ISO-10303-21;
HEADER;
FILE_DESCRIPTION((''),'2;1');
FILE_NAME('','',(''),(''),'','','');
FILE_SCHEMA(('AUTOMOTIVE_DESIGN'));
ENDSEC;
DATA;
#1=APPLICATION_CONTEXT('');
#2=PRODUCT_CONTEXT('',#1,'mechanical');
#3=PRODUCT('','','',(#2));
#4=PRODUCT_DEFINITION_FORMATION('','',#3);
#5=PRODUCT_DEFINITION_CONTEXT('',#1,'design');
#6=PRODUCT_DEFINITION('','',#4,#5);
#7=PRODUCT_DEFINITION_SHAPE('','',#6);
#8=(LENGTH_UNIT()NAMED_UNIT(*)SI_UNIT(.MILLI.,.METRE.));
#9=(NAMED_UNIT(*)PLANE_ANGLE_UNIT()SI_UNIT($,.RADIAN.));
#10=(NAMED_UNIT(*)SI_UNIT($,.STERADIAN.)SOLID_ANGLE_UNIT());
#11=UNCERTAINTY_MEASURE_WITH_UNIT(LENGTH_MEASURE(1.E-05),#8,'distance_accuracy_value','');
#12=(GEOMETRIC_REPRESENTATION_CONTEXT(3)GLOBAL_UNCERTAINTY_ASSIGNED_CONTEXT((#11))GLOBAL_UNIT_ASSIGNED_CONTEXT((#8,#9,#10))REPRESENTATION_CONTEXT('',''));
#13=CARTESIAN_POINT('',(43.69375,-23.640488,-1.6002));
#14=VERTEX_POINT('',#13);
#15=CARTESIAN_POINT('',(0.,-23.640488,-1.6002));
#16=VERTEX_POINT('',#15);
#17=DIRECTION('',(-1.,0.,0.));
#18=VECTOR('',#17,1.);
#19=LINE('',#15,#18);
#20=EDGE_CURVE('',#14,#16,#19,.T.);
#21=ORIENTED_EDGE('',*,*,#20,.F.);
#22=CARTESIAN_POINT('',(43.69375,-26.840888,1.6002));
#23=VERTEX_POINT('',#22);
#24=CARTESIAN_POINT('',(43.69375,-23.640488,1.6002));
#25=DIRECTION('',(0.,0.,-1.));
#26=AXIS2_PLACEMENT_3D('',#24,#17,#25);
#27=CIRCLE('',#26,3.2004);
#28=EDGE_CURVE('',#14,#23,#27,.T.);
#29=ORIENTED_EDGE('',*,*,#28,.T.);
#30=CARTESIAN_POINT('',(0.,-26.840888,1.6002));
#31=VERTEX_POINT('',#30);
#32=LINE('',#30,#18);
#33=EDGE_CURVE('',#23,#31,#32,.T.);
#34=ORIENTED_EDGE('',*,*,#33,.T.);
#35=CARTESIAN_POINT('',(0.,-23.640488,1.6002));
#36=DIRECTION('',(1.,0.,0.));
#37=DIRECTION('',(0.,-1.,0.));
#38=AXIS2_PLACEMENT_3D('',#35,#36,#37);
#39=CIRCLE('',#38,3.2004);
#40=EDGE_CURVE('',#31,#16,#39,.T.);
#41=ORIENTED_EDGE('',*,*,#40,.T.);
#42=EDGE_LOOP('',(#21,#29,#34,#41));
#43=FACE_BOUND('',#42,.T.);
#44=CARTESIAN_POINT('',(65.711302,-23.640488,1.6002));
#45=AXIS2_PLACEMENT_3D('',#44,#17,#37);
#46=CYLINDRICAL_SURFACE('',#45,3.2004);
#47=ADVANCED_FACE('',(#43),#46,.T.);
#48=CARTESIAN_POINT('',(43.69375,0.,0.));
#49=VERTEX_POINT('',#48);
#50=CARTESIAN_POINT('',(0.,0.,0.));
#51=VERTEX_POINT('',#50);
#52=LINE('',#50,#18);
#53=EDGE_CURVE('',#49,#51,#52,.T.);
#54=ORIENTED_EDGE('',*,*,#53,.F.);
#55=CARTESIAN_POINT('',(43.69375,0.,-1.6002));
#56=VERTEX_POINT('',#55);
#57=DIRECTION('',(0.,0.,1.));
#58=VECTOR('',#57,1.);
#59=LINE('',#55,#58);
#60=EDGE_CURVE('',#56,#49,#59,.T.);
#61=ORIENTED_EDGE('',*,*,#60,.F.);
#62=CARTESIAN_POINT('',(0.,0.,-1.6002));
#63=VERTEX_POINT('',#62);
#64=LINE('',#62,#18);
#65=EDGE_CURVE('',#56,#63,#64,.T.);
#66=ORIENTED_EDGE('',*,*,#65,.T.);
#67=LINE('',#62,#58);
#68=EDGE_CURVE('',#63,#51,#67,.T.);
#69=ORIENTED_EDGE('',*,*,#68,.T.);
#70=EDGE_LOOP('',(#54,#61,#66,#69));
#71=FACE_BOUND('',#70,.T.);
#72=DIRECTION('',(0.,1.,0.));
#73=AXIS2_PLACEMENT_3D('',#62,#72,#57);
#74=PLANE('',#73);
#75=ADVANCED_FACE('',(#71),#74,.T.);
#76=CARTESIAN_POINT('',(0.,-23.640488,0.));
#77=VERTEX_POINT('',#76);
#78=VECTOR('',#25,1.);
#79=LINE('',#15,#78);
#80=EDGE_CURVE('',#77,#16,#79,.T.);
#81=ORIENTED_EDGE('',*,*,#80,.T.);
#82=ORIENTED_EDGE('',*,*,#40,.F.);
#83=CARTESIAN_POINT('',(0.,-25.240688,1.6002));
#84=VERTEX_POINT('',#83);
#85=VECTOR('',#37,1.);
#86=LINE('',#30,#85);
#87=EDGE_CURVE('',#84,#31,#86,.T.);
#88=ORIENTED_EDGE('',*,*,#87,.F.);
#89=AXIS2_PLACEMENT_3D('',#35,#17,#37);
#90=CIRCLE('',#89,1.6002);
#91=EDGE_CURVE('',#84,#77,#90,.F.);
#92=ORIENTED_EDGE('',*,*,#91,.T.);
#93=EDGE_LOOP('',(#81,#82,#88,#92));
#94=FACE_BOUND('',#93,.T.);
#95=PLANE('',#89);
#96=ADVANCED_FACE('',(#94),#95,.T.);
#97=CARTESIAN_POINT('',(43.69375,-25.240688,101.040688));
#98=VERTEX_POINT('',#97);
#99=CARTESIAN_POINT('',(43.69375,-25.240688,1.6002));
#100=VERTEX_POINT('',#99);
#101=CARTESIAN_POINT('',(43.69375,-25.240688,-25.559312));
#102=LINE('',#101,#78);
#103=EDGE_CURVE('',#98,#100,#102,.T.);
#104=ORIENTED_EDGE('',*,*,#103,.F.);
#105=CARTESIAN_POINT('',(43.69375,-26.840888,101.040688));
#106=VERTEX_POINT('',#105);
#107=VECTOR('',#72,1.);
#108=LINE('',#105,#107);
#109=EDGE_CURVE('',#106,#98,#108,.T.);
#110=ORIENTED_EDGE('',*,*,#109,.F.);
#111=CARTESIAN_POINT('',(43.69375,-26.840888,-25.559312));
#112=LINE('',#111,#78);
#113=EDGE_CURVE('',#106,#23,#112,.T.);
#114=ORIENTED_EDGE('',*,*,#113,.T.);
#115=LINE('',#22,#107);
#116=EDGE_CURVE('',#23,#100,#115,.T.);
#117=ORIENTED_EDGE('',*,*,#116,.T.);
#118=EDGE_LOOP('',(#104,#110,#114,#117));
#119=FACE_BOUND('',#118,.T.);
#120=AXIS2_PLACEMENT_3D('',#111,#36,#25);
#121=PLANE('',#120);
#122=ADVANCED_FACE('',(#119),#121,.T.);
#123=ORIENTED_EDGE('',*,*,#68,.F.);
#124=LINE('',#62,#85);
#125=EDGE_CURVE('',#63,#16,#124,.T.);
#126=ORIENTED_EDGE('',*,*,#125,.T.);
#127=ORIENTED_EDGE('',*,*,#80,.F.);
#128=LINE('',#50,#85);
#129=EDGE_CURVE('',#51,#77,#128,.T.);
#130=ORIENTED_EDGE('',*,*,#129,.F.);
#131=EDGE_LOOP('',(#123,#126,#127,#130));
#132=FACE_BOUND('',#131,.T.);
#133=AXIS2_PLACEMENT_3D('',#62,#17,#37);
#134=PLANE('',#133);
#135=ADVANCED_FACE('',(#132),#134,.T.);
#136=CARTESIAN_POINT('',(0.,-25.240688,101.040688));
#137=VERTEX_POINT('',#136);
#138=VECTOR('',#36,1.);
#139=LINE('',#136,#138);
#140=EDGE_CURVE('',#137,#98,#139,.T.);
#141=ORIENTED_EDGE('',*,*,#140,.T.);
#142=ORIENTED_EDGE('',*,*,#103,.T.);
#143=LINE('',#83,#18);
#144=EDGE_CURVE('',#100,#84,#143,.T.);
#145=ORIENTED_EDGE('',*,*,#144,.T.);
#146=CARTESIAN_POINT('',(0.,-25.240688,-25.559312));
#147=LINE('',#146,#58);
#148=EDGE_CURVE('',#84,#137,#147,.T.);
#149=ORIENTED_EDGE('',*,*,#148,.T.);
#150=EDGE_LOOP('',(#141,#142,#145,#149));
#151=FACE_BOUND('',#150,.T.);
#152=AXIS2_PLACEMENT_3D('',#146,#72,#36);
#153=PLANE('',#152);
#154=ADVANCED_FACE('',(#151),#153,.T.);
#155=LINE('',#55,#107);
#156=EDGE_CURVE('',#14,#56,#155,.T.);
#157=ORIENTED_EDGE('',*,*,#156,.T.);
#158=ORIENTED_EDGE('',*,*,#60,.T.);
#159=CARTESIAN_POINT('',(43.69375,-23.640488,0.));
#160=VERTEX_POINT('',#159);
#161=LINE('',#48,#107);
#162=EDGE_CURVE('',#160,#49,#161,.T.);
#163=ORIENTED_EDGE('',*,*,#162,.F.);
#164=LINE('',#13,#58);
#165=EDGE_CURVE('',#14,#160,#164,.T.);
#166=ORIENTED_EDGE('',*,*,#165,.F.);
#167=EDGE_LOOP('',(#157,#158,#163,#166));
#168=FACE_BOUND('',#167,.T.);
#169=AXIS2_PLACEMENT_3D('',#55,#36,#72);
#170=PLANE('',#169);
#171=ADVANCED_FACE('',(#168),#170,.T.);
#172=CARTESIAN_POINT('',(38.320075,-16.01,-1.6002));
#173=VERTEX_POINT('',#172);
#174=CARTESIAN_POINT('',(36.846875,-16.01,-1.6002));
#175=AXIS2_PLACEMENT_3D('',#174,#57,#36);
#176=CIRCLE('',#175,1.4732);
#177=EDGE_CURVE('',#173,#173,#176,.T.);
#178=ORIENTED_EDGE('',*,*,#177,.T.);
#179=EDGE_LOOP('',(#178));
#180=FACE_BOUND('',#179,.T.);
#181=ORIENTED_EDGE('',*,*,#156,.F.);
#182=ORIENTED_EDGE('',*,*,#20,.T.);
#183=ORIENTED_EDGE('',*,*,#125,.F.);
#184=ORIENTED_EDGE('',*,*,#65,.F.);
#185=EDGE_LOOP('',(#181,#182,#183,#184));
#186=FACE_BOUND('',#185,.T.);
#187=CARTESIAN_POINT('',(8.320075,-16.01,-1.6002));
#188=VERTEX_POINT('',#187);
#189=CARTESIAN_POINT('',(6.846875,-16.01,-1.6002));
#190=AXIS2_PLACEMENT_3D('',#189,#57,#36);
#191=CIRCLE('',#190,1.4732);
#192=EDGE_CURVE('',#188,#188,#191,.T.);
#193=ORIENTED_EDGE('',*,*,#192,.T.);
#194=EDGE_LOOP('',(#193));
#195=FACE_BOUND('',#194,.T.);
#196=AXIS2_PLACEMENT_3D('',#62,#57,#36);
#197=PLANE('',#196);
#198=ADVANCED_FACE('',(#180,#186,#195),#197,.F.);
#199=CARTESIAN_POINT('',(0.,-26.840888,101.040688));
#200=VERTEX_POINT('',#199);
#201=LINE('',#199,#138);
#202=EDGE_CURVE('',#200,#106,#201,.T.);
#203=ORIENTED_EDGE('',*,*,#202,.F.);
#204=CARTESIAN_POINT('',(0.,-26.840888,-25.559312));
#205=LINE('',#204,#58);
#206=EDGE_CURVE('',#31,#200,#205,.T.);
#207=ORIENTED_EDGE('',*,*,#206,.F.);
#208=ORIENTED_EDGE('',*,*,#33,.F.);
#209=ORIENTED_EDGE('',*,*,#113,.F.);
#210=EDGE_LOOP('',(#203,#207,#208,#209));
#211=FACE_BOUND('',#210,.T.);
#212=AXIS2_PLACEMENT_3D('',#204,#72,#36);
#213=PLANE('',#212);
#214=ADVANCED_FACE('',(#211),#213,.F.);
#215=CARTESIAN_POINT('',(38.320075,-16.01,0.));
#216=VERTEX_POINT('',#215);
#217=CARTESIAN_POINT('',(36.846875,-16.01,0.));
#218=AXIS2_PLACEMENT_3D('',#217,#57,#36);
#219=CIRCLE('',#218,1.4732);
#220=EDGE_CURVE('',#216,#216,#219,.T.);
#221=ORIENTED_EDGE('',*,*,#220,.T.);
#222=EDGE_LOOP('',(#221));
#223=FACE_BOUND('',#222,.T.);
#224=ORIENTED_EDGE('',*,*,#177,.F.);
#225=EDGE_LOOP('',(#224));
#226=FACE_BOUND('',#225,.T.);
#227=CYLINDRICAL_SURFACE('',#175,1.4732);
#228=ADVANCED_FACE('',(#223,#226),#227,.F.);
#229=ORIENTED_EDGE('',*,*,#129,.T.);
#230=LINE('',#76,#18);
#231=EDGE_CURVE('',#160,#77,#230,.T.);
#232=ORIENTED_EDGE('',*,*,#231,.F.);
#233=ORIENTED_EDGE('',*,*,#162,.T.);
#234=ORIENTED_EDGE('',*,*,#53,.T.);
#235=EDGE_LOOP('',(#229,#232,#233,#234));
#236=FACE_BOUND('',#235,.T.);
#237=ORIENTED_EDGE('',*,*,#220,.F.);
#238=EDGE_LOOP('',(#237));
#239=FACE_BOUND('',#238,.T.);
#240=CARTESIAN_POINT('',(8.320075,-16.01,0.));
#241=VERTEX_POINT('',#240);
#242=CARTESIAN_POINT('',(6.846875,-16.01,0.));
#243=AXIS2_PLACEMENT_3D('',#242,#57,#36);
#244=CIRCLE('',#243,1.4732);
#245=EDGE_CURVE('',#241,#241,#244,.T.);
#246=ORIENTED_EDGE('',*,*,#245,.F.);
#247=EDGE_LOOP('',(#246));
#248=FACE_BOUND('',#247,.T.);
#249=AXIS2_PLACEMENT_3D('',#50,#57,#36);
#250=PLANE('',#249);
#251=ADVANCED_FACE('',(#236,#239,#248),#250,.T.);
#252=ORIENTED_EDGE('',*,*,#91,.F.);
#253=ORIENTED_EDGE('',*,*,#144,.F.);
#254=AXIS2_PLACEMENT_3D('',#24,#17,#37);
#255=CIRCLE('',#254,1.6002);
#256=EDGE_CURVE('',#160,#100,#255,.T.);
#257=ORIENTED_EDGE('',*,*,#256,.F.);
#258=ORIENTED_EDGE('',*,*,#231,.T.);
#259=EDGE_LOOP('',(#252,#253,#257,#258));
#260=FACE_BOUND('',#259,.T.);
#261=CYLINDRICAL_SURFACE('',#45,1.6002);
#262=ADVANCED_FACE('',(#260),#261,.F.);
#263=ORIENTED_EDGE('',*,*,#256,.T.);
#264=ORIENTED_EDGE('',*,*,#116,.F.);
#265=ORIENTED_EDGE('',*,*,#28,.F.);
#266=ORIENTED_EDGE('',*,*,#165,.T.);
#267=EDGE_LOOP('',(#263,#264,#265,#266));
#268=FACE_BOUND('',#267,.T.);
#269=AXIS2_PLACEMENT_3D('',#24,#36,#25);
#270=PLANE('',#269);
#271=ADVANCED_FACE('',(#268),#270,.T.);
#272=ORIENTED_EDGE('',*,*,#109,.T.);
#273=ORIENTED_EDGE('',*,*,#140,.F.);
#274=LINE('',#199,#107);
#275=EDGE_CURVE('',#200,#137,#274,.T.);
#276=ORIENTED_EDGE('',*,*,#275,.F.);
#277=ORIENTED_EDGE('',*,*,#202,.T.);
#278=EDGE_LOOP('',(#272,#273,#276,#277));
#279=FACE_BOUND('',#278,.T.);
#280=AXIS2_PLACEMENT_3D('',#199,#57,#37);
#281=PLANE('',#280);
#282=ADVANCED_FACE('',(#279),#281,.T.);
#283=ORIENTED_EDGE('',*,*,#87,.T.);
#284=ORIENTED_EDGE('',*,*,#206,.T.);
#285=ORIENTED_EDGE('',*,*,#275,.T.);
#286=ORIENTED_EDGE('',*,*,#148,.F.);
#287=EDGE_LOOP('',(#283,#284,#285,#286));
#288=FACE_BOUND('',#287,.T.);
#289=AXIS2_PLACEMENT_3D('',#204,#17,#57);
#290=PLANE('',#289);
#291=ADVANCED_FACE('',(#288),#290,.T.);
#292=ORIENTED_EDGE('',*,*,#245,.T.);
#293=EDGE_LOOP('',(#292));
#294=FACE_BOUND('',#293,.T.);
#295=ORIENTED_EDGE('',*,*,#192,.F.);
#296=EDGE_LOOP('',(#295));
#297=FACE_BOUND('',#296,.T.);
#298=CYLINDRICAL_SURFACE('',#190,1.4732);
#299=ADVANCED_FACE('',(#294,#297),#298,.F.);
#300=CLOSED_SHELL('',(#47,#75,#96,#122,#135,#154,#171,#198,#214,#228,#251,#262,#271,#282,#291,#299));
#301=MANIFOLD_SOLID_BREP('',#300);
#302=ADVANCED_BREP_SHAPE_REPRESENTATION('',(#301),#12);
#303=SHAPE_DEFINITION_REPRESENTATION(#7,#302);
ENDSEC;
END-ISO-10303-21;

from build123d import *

# Parameters (mm, degrees)
SKETCH1_W              = 43.69375
SKETCH1_H              = 126.6
SKETCH1_R              = 1.4732
BASE_FLANGE1_DEPTH     = 1.6002
SKETCHED_BEND1_DEPTH   = 43.69375
SKETCHED_BEND1_2_DEPTH = 43.69375


# Read off the part's stored shape, not the designer's step: Sketched Bend1
# Sheet-metal steps are written as plain solids
with BuildPart() as part:
    # Sketch1 → Base-Flange1 (new body)
    with BuildSketch(Plane.XY):
        with Locations((21.846875, -63.3)):
            Rectangle(SKETCH1_W, SKETCH1_H)
        with Locations((6.846875, -16.01)):
            Circle(SKETCH1_R, mode=Mode.SUBTRACT)
        with Locations((36.846875, -16.01)):
            Circle(SKETCH1_R, mode=Mode.SUBTRACT)
    extrude(amount=-BASE_FLANGE1_DEPTH)

    # Sketched Bend1 outline → Sketched Bend1 (cut)
    with BuildSketch(Plane.YZ):
        with BuildLine():
            ThreePointArc((-23.640488203, -1.6002), (-25.240688203, -1.171427702), (-26.412115905, 0))
            Line((-26.412115905, 0), (-126.6, 0))
            Line((-126.6, 0), (-126.6, -1.6002))
            Line((-126.6, -1.6002), (-23.640488203, -1.6002))
        make_face()
    extrude(amount=SKETCHED_BEND1_DEPTH, mode=Mode.SUBTRACT)

    # Sketched Bend1 2 outline → Sketched Bend1 2 (add)
    with BuildSketch(Plane.YZ):
        with BuildLine():
            ThreePointArc((-23.640488203, 0), (-24.772000474, 0.468687729), (-25.240688203, 1.6002))
            Line((-25.240688203, 1.6002), (-25.240688203, 101.040688203))
            Line((-25.240688203, 101.040688203), (-26.840888203, 101.040688203))
            Line((-26.840888203, 101.040688203), (-26.840888203, 1.6002))
            ThreePointArc((-26.840888203, 1.6002), (-26.731837217, 0.771875528), (-26.412115905, 0))
            Line((-26.412115905, 0), (-23.640488203, 0))
        make_face()
    extrude(amount=SKETCHED_BEND1_2_DEPTH)


solid = part.part
